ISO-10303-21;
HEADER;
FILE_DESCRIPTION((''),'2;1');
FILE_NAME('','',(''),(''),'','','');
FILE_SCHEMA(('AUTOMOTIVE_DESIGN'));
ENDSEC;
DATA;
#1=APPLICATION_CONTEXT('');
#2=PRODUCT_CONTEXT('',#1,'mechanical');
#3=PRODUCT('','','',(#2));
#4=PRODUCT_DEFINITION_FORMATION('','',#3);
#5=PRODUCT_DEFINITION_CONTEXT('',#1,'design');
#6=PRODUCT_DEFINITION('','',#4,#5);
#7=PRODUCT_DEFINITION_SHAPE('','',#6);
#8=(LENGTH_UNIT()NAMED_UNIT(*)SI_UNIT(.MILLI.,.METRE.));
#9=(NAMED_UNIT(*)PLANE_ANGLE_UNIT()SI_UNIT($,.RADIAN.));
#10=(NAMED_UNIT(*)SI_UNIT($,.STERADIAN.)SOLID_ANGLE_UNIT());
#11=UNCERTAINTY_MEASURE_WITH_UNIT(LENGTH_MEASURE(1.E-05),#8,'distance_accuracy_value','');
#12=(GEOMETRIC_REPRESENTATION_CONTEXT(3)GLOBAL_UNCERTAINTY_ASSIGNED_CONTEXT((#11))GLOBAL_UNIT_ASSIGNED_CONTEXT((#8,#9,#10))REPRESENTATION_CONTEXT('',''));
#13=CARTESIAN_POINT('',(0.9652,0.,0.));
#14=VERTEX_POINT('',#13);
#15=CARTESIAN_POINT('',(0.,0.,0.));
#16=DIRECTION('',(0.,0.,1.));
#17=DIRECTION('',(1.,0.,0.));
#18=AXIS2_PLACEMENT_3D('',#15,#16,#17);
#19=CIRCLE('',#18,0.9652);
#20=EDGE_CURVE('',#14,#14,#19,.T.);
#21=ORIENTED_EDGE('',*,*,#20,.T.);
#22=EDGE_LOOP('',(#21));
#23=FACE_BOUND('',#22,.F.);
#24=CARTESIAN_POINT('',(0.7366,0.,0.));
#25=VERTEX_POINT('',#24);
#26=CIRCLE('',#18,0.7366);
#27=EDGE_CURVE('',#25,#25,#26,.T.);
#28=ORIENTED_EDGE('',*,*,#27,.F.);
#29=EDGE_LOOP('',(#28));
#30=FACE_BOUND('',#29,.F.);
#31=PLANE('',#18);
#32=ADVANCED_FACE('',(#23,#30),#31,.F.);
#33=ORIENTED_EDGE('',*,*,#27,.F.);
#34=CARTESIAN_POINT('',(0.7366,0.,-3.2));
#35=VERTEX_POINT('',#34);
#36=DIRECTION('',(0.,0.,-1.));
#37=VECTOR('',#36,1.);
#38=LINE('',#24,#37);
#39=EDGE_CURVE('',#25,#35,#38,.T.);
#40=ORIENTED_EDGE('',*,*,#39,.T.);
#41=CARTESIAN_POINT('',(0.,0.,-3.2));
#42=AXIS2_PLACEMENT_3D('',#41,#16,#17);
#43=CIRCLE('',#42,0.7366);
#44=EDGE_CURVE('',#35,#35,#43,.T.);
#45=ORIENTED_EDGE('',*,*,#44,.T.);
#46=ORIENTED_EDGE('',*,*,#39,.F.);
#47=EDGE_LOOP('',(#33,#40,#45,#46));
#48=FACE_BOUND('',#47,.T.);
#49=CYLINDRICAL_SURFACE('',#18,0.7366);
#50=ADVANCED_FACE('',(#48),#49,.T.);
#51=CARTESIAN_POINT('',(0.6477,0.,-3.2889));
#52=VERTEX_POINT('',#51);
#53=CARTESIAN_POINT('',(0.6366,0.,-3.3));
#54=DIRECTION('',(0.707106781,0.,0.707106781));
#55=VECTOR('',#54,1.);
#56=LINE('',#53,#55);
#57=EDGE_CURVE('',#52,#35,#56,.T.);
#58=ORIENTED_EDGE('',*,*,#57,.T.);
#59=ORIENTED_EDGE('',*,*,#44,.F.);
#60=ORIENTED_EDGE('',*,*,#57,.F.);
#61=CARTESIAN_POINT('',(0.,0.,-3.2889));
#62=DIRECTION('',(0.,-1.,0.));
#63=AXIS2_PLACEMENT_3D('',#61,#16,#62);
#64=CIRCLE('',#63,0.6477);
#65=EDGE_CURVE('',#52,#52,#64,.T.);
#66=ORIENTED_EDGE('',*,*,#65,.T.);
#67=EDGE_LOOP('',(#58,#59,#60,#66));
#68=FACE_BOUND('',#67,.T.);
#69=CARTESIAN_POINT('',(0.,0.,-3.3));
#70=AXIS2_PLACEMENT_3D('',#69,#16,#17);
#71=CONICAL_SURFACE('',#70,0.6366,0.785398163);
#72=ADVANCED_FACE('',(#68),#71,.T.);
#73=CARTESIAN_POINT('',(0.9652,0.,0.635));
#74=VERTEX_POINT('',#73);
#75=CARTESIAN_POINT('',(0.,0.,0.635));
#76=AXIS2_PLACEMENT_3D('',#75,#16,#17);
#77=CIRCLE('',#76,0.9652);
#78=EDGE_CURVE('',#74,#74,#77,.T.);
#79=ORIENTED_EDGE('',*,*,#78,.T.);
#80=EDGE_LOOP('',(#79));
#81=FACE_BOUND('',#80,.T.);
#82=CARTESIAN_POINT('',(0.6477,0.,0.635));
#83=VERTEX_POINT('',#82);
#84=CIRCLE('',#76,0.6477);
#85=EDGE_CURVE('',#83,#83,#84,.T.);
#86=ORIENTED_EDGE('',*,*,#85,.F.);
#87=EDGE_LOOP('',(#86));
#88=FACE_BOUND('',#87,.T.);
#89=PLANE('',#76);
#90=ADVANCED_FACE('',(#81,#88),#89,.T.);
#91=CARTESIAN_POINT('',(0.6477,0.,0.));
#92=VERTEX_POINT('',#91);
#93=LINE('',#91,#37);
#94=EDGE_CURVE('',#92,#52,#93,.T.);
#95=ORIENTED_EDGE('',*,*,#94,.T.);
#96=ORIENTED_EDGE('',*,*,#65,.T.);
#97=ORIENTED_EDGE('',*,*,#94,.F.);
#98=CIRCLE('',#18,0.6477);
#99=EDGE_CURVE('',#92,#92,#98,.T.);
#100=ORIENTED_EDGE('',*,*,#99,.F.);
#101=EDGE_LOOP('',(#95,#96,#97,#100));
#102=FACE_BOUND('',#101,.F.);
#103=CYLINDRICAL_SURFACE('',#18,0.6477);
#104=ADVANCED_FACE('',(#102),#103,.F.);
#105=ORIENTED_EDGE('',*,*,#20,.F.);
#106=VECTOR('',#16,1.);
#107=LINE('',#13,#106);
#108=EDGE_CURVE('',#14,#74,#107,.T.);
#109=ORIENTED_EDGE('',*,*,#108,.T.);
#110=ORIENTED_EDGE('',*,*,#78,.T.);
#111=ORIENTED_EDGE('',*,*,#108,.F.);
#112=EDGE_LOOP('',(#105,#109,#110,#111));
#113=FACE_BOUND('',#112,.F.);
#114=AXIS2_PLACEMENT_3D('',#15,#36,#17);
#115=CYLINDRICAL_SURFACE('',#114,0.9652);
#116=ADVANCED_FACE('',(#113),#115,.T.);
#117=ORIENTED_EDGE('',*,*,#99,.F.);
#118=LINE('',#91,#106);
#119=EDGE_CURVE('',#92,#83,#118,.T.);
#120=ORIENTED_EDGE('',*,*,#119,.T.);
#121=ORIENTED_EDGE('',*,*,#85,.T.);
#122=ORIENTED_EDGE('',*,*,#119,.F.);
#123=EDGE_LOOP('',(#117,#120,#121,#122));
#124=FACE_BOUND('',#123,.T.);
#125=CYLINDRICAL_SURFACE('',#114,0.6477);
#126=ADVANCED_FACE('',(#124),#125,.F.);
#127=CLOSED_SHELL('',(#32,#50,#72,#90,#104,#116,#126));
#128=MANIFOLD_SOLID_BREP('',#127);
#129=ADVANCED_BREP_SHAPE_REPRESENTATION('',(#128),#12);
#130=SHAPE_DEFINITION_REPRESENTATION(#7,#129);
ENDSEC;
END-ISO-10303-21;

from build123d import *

# Parameters (mm, degrees)
F0_R     = 0.9652
F0_R_2   = 0.7366
F0_R_3   = 0.6477
F1_DEPTH = 0.635
F2_DEPTH = 3.3


# Not quite as in the source:
# - a fillet or chamfer that OpenCascade refuses, or shapes differently, is made with other operations: its cross-section is extruded or revolved along the edge and cut away or added


with BuildPart() as f1:
    # F0 (on Top) → F1 (new body)
    with BuildSketch(Plane.XY):
        Circle(F0_R)
        Circle(F0_R_2, mode=Mode.SUBTRACT)
        Circle(F0_R_2)
        Circle(F0_R_3, mode=Mode.SUBTRACT)
    extrude(amount=F1_DEPTH)

    # F0 (on Top) → F2 (join)
    with BuildSketch(Plane.XY):
        Circle(F0_R_2)
        Circle(F0_R_3, mode=Mode.SUBTRACT)
    extrude(amount=-F2_DEPTH)

    # F3: chamfer of 0.1 on 1 edges, made by hand

    # F3_s1 → F3_t2 (revolve, cut)
    with BuildSketch(Plane.XZ):
        Polygon((0.6366, -3.3), (0.7366, -3.2), (0.7366, -3.3), align=None)
    revolve(axis=Axis((0, 0, -3.3), (0, 0, 1)), mode=Mode.SUBTRACT)


solid = f1.part
